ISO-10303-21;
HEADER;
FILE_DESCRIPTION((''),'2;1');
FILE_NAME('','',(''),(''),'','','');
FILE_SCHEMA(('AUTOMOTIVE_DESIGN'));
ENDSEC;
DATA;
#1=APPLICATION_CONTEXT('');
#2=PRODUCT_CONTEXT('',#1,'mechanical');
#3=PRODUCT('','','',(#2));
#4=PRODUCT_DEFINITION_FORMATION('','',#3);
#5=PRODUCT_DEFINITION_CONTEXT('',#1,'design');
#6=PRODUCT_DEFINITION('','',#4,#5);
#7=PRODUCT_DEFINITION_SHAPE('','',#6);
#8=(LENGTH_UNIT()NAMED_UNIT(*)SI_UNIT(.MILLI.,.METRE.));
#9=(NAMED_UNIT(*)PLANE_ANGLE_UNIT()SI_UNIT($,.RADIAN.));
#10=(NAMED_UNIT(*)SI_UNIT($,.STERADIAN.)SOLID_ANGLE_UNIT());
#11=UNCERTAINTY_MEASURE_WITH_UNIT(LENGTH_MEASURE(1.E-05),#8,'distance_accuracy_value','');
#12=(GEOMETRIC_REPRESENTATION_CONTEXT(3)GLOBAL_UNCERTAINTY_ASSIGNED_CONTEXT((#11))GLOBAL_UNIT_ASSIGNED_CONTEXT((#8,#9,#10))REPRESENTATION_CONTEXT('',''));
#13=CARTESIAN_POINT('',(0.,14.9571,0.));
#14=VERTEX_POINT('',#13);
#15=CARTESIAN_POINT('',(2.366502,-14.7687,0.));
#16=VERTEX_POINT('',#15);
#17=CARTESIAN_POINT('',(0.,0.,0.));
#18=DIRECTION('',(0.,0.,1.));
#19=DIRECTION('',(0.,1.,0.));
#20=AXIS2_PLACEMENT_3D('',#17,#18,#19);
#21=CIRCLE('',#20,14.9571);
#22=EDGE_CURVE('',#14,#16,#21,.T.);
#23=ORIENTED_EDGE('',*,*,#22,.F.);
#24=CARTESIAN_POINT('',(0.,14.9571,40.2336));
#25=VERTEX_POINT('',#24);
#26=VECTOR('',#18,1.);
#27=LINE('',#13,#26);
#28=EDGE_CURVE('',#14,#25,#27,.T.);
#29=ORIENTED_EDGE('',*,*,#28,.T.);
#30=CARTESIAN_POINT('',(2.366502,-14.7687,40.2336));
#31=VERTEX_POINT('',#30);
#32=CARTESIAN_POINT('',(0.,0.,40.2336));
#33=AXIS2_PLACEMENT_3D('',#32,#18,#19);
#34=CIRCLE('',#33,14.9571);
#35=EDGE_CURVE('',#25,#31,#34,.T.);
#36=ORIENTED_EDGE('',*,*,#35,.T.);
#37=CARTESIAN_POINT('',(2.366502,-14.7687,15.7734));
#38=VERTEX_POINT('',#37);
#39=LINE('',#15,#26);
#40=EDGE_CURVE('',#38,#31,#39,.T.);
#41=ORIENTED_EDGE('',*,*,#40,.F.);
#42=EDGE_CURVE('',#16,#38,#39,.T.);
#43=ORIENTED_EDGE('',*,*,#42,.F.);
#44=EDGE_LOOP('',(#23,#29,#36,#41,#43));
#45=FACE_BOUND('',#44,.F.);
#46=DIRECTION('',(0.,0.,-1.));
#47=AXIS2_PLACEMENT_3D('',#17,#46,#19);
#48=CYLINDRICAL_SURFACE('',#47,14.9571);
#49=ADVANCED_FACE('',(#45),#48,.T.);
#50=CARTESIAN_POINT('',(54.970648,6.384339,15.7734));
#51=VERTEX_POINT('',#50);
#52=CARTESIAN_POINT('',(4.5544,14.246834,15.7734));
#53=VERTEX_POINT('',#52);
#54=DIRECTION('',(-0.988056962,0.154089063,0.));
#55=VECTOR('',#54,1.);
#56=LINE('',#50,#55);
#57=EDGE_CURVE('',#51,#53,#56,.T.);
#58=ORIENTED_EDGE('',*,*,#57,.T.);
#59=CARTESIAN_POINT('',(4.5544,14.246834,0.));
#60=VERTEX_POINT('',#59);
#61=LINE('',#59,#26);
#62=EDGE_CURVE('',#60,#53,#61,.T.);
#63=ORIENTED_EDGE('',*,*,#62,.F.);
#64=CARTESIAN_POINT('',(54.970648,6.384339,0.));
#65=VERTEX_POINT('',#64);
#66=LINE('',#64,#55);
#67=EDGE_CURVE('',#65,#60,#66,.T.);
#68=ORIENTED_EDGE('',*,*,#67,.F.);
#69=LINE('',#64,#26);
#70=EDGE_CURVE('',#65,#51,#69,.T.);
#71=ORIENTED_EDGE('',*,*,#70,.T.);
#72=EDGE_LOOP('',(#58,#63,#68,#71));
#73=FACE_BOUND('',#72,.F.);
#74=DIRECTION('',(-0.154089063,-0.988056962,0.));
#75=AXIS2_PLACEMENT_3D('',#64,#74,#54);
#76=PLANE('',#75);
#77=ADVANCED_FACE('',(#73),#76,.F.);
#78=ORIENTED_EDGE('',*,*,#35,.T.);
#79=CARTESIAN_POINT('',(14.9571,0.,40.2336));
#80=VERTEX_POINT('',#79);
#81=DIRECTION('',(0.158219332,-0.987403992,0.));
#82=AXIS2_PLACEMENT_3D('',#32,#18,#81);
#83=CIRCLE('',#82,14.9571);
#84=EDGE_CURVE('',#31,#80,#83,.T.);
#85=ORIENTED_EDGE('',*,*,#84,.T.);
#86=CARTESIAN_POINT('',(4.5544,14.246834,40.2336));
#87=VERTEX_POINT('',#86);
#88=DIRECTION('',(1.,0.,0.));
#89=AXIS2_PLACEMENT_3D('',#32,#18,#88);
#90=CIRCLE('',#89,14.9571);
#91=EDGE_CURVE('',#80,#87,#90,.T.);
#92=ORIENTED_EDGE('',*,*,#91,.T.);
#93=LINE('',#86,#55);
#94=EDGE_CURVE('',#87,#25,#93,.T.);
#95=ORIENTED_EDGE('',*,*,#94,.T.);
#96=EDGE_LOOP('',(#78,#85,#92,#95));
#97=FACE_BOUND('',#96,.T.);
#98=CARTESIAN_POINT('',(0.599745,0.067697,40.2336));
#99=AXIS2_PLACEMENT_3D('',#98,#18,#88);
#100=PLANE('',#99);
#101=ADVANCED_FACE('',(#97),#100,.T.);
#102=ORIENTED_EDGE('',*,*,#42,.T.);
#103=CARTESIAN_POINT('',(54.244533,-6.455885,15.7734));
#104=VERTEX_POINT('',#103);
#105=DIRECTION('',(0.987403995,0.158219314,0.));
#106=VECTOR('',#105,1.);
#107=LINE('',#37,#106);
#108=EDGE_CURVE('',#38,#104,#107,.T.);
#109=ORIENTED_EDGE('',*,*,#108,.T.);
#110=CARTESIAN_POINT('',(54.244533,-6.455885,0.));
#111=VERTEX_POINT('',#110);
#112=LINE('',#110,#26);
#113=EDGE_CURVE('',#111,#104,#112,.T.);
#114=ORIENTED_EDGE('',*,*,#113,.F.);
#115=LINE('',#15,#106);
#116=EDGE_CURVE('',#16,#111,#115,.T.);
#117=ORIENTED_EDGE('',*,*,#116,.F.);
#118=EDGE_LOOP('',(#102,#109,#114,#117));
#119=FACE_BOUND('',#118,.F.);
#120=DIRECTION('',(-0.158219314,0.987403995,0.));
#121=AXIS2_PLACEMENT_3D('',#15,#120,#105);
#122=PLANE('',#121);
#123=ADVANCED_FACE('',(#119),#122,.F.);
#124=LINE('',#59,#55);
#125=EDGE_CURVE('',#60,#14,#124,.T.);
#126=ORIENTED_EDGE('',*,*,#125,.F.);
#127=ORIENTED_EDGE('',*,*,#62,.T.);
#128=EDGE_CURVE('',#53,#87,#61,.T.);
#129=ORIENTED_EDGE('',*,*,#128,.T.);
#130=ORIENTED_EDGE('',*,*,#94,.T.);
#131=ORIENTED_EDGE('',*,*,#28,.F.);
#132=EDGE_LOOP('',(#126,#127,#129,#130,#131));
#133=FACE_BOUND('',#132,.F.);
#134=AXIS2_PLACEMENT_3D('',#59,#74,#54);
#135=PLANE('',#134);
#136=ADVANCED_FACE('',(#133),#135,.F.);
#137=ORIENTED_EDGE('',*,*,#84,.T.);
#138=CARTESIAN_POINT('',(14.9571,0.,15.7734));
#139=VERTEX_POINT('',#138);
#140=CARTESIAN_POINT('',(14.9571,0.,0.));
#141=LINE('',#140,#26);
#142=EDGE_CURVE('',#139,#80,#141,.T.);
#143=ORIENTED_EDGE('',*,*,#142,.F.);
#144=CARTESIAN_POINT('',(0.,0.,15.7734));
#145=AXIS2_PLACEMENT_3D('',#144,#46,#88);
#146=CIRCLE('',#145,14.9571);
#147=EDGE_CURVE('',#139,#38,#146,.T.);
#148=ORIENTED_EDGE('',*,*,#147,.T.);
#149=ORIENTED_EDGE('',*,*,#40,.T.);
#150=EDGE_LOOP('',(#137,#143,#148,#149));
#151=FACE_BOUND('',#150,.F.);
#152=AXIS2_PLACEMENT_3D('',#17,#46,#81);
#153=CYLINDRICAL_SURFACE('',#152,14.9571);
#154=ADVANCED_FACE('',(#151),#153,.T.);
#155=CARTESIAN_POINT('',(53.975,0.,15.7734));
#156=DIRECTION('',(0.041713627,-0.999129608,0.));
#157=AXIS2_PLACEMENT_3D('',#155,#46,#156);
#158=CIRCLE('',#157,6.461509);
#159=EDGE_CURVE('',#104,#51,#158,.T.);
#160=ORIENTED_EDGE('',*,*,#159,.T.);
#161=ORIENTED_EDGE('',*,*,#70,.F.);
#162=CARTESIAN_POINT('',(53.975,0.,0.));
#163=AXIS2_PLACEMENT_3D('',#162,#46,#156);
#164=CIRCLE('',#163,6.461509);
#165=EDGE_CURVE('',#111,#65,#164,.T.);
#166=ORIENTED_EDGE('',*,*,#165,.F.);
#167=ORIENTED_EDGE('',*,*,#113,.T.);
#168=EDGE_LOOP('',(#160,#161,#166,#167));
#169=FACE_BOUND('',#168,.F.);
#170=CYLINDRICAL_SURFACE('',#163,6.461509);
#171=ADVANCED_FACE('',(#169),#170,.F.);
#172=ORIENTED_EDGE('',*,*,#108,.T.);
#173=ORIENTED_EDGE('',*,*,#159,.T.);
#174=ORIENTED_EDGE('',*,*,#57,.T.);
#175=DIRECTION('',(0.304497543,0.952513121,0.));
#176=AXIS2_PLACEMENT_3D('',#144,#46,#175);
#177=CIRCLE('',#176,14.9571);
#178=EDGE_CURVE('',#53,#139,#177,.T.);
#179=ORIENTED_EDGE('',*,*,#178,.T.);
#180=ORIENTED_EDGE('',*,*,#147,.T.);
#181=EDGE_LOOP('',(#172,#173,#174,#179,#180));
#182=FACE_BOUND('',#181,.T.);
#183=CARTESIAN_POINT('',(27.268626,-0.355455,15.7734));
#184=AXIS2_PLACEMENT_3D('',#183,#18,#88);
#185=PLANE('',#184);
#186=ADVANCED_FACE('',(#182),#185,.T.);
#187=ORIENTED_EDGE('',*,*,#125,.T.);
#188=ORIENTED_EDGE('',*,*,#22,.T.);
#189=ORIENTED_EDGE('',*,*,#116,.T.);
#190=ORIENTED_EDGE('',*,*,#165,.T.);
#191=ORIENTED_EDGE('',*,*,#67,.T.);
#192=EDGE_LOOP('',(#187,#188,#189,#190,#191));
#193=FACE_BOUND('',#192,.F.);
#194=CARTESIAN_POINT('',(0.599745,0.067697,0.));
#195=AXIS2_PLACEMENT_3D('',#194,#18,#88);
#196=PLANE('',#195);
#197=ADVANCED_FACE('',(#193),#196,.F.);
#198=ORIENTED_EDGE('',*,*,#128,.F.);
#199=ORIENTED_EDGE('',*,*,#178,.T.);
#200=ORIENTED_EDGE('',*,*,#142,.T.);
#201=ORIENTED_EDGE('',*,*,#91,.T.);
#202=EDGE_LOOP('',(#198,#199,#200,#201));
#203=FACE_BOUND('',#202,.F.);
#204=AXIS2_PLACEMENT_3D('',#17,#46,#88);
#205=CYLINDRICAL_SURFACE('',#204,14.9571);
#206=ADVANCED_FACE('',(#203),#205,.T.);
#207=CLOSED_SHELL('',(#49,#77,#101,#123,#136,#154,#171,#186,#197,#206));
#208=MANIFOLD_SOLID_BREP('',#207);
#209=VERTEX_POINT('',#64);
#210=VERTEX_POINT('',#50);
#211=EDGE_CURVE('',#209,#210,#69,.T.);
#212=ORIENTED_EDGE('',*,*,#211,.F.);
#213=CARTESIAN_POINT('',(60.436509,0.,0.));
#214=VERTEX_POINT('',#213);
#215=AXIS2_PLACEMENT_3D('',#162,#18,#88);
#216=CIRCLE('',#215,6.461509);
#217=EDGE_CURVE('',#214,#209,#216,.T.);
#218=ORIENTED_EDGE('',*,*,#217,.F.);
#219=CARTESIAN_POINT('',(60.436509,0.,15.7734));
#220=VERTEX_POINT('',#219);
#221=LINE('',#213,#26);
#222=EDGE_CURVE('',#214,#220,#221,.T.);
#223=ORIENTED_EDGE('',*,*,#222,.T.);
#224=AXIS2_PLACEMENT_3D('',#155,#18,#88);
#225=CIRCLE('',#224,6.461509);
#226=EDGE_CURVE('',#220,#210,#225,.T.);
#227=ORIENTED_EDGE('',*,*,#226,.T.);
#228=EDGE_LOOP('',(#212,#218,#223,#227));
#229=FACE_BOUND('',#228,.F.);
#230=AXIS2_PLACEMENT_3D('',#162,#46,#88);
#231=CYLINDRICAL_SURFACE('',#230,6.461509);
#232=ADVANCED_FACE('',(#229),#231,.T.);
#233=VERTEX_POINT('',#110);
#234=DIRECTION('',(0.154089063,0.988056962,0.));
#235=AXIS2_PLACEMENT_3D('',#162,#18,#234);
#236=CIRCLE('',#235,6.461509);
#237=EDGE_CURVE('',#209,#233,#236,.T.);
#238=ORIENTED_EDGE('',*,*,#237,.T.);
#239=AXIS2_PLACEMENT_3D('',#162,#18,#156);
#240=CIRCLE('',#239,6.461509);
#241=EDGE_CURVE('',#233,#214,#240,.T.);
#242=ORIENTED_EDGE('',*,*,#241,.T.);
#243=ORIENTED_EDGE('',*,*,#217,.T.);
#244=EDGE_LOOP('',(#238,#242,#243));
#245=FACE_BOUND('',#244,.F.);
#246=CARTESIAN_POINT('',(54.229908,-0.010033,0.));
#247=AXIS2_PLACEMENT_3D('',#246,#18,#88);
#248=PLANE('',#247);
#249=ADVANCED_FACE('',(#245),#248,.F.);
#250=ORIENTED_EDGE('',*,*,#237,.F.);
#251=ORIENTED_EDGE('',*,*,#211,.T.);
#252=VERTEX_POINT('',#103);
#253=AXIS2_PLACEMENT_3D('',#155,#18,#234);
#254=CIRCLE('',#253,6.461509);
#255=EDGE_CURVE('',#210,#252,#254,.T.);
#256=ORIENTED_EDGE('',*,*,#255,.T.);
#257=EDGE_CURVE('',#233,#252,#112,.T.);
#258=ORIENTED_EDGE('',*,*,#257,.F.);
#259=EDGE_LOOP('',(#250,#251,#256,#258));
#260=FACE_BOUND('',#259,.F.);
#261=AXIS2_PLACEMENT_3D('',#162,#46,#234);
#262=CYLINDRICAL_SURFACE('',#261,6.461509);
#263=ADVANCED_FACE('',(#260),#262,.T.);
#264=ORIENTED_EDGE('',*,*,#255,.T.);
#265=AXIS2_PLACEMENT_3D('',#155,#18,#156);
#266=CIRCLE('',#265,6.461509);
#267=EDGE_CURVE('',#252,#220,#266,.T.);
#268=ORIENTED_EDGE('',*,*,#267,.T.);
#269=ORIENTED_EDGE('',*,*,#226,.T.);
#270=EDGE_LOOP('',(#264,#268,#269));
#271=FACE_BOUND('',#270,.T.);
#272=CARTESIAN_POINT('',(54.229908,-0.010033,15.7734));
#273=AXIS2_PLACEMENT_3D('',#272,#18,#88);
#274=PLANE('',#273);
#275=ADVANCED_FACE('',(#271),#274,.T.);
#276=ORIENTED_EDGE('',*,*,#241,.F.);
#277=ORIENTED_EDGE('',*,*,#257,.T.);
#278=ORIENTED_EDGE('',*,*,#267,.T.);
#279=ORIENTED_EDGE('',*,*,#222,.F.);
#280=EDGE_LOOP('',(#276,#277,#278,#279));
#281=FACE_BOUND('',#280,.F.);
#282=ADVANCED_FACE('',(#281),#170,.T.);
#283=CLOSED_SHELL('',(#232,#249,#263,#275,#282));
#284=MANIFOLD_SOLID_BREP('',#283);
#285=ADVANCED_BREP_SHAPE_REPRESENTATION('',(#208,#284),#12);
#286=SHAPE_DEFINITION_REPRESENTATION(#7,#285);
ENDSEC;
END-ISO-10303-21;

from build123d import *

# Parameters (mm, degrees)
F3_DEPTH = 15.7734
F4_DEPTH = 40.2336


with BuildPart() as f3:
    # F1 (on face) → F3 (new body)
    with BuildSketch(Plane.XY):
        with BuildLine():
            Line((2.3665023004, -14.7686997904), (54.2445329823, -6.4558851165))
            ThreePointArc((54.2445329823, -6.4558851165), (47.5237977676, 0.3648156016), (54.9706478921, 6.3843391154))
            Line((54.9706478921, 6.3843391154), (4.5544000586, 14.246833569))
            ThreePointArc((4.5544000586, 14.246833569), (12.0796407574, 8.8202667652), (14.9570995396, 0))
            ThreePointArc((14.9570995396, 0), (11.3822413677, -9.7035770768), (2.3665023004, -14.7686997904))
        make_face()
    extrude(amount=F3_DEPTH)

    # F0 (on Top) → F4 (join)
    with BuildSketch(Plane.XY):
        with BuildLine():
            ThreePointArc((14.9570995396, 0), (12.0796407574, 8.8202667652), (4.5544000586, 14.246833569))
            Line((4.5544000586, 14.246833569), (0, 14.9570995396))
            ThreePointArc((0, 14.9570995396), (-14.9099252089, -1.1869949034), (2.3665023004, -14.7686997904))
            ThreePointArc((2.3665023004, -14.7686997904), (11.3822413677, -9.7035770768), (14.9570995396, 0))
        make_face()
    extrude(amount=F4_DEPTH)


with BuildPart() as f3b:
    # F2 (on face) → F3, piece 2 (new body)
    with BuildSketch(Plane.XY):
        with BuildLine():
            ThreePointArc((54.9706478921, 6.3843391154), (47.5237977676, 0.3648156016), (54.2445329823, -6.4558851165))
            ThreePointArc((54.2445329823, -6.4558851165), (58.6382976798, -4.472667595), (60.4365091632, 0))
            ThreePointArc((60.4365091632, 0), (58.8833851033, 4.2022442033), (54.9706478921, 6.3843391154))
        make_face()
    extrude(amount=F3_DEPTH)


solid = Compound([f3.part, f3b.part])
